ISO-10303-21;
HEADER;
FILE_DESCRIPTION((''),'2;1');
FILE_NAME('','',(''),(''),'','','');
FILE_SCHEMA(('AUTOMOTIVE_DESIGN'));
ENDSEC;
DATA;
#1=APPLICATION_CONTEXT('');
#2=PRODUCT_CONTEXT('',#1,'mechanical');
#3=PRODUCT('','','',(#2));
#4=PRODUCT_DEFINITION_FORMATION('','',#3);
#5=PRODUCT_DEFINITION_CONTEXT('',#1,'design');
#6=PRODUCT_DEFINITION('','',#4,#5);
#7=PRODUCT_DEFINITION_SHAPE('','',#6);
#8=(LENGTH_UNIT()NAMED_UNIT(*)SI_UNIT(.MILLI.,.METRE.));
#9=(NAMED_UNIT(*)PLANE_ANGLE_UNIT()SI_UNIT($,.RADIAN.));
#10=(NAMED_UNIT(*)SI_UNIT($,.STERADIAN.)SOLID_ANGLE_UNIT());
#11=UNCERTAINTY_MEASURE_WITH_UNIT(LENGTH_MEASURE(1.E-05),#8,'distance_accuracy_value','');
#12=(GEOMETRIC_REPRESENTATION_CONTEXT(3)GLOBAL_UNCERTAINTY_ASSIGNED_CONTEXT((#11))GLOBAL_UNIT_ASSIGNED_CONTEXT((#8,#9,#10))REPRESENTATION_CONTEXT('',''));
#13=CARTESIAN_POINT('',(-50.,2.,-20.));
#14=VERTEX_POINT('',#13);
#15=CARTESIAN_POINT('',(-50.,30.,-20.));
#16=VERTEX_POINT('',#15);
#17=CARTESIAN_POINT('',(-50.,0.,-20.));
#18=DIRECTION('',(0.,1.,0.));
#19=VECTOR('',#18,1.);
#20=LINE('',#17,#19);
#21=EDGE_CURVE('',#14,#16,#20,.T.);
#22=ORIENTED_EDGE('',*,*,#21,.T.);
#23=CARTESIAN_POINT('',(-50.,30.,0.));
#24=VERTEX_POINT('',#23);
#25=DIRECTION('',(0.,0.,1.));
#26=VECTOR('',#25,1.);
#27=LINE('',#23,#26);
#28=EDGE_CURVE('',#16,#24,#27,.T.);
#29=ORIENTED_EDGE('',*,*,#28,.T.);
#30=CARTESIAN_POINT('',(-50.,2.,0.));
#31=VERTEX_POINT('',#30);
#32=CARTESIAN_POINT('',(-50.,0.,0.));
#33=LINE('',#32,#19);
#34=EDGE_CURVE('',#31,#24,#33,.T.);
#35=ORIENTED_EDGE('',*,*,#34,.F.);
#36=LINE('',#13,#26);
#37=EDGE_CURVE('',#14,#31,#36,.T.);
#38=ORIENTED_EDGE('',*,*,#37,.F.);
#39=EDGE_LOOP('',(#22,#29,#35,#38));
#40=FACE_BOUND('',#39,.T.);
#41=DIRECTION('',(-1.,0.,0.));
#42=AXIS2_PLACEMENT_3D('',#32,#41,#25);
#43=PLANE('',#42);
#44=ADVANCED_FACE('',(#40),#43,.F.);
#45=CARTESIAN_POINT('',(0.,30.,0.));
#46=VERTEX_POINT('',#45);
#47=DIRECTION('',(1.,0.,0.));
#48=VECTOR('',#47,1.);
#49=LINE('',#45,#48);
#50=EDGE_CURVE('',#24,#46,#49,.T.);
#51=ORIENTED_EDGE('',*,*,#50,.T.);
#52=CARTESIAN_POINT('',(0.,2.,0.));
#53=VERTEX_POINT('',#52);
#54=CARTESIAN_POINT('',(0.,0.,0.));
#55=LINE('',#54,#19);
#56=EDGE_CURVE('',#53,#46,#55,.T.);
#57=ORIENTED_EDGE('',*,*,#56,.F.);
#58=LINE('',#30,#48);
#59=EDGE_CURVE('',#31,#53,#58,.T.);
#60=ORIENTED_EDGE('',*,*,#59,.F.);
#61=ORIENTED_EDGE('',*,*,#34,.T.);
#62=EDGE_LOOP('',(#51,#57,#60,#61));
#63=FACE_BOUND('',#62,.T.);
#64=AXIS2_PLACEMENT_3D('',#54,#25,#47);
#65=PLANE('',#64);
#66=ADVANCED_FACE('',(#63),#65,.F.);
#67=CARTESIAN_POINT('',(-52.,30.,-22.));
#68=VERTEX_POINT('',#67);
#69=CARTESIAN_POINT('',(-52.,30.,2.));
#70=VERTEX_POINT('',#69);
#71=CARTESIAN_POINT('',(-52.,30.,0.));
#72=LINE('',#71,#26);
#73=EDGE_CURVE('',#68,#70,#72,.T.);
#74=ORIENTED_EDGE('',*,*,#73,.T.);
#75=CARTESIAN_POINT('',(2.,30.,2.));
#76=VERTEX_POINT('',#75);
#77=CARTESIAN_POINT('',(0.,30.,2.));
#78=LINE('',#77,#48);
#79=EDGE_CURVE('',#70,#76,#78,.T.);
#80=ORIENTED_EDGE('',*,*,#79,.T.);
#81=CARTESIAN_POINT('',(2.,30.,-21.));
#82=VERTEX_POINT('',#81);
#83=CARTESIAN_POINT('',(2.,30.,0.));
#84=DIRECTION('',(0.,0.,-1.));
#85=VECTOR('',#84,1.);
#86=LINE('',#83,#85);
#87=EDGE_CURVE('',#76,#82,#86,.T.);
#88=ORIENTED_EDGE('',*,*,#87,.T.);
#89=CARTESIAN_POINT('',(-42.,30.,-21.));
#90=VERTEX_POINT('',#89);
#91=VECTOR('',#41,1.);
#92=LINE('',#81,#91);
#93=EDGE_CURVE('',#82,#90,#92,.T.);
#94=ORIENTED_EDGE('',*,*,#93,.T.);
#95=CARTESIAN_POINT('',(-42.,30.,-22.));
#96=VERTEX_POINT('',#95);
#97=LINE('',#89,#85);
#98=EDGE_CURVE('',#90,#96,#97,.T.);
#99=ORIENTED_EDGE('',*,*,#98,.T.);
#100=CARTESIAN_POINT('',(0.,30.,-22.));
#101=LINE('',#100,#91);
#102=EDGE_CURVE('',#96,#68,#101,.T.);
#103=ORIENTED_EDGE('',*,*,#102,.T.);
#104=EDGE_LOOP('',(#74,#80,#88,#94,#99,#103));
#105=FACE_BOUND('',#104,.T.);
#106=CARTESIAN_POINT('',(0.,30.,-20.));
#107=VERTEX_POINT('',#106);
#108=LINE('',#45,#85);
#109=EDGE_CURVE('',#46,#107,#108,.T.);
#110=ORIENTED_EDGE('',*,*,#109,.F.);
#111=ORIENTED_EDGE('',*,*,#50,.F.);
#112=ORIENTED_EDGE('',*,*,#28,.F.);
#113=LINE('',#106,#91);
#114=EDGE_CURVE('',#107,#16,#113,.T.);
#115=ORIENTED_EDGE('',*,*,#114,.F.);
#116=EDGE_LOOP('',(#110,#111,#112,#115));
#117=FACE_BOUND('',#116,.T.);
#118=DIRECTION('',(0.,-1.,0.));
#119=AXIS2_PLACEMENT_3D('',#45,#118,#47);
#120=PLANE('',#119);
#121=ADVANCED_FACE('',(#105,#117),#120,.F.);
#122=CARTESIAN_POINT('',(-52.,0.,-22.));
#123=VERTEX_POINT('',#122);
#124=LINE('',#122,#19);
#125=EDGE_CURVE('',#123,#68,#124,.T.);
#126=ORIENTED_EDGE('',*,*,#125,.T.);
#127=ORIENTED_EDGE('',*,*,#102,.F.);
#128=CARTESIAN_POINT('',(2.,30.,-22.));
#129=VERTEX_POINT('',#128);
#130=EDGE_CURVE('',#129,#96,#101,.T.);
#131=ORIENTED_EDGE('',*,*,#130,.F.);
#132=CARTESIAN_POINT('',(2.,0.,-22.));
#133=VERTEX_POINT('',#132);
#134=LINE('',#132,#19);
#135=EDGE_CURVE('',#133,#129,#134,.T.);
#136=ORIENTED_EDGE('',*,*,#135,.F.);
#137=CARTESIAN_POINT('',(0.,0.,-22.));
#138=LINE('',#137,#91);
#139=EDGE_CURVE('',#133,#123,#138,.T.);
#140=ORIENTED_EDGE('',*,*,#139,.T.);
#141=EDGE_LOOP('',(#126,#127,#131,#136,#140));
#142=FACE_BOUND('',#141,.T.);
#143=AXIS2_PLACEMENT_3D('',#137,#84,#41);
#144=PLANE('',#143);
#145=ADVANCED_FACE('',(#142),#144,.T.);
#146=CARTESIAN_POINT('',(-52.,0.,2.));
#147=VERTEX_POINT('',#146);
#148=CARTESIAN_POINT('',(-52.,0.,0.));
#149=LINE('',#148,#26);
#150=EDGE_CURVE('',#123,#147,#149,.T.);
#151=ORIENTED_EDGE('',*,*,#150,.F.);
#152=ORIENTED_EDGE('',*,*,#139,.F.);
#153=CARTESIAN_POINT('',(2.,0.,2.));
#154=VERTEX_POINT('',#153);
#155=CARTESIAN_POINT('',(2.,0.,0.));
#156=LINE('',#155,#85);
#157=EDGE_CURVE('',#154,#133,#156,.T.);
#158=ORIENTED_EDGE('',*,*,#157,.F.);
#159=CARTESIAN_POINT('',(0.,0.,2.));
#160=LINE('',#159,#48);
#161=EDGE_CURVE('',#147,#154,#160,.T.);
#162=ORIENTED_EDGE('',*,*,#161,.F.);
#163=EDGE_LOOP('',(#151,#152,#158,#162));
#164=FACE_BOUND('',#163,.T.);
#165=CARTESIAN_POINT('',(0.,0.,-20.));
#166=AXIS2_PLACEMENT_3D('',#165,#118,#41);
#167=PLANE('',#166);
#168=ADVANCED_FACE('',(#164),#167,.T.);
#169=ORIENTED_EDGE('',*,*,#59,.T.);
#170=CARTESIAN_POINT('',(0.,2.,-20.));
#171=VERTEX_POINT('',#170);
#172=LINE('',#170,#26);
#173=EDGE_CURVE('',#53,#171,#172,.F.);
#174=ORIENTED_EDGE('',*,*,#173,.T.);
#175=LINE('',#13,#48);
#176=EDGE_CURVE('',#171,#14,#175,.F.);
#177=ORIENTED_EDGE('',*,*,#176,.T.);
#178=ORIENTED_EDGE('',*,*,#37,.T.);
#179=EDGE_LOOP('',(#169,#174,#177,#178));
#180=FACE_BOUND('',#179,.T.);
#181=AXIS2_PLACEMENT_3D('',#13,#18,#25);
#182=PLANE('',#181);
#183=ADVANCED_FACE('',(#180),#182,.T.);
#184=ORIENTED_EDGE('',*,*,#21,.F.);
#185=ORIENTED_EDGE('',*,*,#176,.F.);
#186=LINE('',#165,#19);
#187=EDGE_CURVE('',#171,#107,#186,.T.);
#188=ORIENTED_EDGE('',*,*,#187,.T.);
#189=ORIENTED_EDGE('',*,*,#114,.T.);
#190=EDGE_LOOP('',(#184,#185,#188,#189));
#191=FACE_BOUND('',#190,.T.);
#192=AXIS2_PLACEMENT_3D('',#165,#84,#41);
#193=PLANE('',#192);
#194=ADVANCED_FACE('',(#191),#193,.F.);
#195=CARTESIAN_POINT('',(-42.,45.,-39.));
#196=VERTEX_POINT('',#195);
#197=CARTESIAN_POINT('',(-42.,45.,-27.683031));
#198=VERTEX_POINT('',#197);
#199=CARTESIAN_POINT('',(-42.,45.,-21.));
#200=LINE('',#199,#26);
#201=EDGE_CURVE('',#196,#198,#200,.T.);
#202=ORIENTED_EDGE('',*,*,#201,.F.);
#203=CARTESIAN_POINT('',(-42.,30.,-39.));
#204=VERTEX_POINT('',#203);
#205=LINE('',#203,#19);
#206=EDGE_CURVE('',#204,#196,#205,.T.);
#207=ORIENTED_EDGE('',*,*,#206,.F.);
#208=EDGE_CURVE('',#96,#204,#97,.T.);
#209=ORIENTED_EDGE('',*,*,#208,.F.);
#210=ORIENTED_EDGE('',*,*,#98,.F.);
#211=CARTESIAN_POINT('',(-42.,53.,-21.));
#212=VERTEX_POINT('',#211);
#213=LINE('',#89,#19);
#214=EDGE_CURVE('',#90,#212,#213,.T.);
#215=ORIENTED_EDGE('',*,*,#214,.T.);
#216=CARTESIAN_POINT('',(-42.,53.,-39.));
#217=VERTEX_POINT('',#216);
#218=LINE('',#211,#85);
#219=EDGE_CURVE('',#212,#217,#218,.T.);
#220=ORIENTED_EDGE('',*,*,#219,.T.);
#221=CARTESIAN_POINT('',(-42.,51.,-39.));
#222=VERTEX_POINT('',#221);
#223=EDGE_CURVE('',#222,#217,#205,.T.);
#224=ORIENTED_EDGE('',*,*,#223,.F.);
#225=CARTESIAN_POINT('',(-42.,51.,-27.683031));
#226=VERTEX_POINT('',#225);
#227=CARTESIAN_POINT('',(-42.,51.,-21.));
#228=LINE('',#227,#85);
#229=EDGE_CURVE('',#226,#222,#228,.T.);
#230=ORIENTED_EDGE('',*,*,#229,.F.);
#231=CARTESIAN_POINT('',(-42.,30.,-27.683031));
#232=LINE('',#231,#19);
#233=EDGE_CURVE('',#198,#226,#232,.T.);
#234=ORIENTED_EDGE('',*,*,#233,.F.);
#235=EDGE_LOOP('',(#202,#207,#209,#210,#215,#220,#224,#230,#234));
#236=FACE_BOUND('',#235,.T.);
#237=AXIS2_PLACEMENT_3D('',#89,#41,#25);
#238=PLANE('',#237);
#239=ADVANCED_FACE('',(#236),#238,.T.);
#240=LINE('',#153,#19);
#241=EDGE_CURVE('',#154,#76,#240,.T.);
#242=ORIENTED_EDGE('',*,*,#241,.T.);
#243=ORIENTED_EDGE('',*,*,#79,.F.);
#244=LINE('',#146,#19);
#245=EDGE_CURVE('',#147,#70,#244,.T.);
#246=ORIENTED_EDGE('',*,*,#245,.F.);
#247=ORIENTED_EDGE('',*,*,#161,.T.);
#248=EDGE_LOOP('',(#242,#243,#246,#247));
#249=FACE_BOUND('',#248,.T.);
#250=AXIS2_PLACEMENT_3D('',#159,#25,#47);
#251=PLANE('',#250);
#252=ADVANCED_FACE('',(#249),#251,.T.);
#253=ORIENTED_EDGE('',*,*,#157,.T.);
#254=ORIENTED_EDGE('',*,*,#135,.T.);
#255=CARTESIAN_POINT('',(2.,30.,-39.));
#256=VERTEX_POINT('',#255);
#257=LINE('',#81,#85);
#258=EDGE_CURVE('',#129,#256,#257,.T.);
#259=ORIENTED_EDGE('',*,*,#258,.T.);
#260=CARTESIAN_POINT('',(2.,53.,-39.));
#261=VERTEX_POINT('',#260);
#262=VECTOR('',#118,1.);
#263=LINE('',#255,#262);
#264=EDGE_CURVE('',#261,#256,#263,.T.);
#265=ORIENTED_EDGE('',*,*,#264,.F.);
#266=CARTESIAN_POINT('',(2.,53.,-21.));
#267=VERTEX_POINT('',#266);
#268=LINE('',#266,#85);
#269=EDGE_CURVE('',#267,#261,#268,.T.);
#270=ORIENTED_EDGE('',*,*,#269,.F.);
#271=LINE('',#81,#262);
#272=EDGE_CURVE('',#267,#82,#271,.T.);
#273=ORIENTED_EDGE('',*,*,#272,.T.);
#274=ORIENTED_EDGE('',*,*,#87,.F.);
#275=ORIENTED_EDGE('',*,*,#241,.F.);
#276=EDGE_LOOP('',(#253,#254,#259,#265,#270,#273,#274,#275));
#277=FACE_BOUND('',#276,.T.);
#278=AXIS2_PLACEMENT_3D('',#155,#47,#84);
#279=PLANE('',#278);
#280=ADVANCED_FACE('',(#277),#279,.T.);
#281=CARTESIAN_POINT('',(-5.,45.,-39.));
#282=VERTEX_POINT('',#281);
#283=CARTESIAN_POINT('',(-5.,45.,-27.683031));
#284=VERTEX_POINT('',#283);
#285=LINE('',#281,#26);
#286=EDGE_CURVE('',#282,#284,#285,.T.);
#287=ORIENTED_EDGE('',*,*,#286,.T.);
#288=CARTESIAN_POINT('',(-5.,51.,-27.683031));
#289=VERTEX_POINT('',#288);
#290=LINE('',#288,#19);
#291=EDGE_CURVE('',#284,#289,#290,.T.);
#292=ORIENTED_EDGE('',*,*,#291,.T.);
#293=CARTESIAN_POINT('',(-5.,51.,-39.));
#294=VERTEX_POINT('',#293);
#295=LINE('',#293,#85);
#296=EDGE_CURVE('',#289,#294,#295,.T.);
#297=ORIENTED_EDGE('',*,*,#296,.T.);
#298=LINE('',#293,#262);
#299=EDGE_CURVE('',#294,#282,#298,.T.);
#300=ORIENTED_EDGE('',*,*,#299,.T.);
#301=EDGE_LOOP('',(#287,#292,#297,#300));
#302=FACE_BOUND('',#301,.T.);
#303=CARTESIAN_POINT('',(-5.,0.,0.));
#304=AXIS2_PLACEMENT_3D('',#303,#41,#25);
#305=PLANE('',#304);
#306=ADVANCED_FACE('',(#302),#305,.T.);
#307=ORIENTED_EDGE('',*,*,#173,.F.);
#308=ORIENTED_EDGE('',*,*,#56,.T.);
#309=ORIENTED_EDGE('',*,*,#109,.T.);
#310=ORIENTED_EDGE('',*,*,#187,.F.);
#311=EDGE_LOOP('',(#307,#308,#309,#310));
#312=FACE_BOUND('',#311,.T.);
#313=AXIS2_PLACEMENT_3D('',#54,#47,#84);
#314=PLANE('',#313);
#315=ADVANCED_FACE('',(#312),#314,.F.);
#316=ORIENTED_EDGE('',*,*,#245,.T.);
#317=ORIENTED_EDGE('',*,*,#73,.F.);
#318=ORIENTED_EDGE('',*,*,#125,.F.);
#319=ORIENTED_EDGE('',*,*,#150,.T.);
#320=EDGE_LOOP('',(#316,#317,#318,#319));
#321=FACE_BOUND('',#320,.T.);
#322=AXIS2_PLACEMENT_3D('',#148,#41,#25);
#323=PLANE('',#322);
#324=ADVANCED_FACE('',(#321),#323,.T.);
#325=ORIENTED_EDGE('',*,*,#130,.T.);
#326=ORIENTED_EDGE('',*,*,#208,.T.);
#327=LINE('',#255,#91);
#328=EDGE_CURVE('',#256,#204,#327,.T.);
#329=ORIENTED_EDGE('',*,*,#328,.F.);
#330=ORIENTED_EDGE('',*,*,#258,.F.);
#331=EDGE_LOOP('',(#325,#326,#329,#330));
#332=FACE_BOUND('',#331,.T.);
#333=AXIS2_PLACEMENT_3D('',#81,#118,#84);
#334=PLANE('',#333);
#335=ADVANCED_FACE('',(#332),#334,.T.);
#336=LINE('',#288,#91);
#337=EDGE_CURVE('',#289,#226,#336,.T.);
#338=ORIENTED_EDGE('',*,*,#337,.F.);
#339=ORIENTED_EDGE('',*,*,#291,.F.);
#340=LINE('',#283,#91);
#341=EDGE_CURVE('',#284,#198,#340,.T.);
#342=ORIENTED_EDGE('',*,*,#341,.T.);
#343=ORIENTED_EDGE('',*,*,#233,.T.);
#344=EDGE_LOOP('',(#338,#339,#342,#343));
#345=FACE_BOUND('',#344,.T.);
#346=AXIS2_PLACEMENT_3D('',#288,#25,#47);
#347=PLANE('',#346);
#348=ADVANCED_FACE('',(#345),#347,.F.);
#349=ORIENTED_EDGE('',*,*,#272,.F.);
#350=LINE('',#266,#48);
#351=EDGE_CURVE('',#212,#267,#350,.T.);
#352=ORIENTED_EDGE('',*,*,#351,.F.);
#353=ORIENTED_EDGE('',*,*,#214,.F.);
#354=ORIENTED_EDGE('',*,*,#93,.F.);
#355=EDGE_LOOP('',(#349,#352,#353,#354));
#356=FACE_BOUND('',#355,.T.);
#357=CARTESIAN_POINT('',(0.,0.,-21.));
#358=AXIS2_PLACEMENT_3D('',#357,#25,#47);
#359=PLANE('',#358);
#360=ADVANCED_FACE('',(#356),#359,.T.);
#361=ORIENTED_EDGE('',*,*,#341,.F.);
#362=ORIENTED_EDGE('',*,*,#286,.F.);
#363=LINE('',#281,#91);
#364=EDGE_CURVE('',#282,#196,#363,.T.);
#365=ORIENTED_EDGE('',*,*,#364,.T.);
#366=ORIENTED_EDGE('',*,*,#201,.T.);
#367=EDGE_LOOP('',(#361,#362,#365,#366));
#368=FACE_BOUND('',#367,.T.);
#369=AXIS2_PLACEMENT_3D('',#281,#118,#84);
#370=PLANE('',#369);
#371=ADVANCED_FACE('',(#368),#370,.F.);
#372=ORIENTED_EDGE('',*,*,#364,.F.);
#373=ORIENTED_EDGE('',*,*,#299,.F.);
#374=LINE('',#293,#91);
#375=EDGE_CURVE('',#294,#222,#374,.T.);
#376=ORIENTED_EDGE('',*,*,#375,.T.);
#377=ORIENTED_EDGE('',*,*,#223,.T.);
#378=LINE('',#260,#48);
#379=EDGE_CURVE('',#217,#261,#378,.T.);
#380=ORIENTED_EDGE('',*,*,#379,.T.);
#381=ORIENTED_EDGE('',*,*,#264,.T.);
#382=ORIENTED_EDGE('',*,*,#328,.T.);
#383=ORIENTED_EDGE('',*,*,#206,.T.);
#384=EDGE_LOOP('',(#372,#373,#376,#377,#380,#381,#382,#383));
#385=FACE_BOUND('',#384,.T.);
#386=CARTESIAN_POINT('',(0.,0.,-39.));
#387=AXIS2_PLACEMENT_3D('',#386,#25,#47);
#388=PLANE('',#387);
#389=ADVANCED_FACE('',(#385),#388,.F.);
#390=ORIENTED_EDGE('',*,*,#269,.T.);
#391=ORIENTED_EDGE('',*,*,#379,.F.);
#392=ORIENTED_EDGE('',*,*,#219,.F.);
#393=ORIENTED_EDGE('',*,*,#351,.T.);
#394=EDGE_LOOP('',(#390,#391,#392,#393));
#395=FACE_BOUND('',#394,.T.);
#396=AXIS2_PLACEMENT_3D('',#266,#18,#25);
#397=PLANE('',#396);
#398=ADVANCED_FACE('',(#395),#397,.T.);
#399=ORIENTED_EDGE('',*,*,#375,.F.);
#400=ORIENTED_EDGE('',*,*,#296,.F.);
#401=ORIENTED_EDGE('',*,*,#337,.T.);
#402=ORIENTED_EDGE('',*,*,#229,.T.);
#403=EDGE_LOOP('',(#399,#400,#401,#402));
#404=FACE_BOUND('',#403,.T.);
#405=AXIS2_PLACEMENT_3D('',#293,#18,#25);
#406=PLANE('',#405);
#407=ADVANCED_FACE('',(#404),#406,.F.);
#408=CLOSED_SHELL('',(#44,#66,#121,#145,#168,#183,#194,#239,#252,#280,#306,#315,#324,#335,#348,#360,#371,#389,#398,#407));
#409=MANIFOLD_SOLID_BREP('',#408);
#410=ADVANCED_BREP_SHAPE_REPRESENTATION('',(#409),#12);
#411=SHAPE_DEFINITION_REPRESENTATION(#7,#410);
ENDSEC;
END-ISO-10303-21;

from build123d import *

# Parameters (mm, degrees)
SURFACE_EXTRUSION1_1_DEPTH = 30
EPAISSIR1_T1               = 2
EPAISSIR2_OUTLINE_W        = 50
EPAISSIR2_OUTLINE_H        = 20
EPAISSIR2_DEPTH            = 2
BOSS_EXTRU_1_DEPTH         = 17
BOSS_EXTRU_1_DEPTH_BACK    = 1
ESQUISSE2_W                = 44
ESQUISSE2_H                = 23
ESQUISSE3_W                = 11.316968607
ESQUISSE3_H                = 6
ENL_V_MAT_EXTRU_1_DEPTH    = 47


# Read off the part's stored shape, not the designer's step: Epaissir2
with BuildPart() as body_1:
    # Surface-Extrusion1: a surface, the sketch's curves swept straight by 30 mm
    with BuildLine(Plane(origin=(0, 0, 0), x_dir=(1, 0, 0), z_dir=(0, 1, 0)), mode=Mode.PRIVATE) as surface_extrusion1_1_path:
        Line((0, 0), (-50, 0))
        Line((-50, 0), (-50, 20))
        Line((-50, 20), (0, 20))
        Line((0, 20), (0, 0))
    surface_extrusion1_1 = Shell.extrude(surface_extrusion1_1_path.wire(), (0 * SURFACE_EXTRUSION1_1_DEPTH, 1 * SURFACE_EXTRUSION1_1_DEPTH, 0 * SURFACE_EXTRUSION1_1_DEPTH))
    add(Solid.thicken(surface_extrusion1_1, EPAISSIR1_T1))

    # Epaissir2 outline → Epaissir2 (add)
    with BuildSketch(Plane(origin=(0, 0, 0), x_dir=(1, 0, 0), z_dir=(0, 1, 0))):
        with Locations((-25, 10)):
            Rectangle(EPAISSIR2_OUTLINE_W, EPAISSIR2_OUTLINE_H)
    extrude(amount=EPAISSIR2_DEPTH)

    # Esquisse2 → Boss.-Extru.1 (add, two sides: drawn at the far end of the back side and taken through both)
    with BuildSketch(Plane(origin=(0, 0, -22), x_dir=(-1, 0, 0), z_dir=(0, 0, -1)).offset(-BOSS_EXTRU_1_DEPTH_BACK)):
        with Locations((20, 41.5)):
            Rectangle(ESQUISSE2_W, ESQUISSE2_H)
    extrude(amount=BOSS_EXTRU_1_DEPTH + BOSS_EXTRU_1_DEPTH_BACK)

    # Esquisse3 → Enlèv. mat.-Extru.1 (cut)
    with BuildSketch(Plane.ZY.offset(52)):
        with Locations((-33.341515696, 48)):
            Rectangle(ESQUISSE3_W, ESQUISSE3_H)
    extrude(amount=-ENL_V_MAT_EXTRU_1_DEPTH, mode=Mode.SUBTRACT)


solid = body_1.part
